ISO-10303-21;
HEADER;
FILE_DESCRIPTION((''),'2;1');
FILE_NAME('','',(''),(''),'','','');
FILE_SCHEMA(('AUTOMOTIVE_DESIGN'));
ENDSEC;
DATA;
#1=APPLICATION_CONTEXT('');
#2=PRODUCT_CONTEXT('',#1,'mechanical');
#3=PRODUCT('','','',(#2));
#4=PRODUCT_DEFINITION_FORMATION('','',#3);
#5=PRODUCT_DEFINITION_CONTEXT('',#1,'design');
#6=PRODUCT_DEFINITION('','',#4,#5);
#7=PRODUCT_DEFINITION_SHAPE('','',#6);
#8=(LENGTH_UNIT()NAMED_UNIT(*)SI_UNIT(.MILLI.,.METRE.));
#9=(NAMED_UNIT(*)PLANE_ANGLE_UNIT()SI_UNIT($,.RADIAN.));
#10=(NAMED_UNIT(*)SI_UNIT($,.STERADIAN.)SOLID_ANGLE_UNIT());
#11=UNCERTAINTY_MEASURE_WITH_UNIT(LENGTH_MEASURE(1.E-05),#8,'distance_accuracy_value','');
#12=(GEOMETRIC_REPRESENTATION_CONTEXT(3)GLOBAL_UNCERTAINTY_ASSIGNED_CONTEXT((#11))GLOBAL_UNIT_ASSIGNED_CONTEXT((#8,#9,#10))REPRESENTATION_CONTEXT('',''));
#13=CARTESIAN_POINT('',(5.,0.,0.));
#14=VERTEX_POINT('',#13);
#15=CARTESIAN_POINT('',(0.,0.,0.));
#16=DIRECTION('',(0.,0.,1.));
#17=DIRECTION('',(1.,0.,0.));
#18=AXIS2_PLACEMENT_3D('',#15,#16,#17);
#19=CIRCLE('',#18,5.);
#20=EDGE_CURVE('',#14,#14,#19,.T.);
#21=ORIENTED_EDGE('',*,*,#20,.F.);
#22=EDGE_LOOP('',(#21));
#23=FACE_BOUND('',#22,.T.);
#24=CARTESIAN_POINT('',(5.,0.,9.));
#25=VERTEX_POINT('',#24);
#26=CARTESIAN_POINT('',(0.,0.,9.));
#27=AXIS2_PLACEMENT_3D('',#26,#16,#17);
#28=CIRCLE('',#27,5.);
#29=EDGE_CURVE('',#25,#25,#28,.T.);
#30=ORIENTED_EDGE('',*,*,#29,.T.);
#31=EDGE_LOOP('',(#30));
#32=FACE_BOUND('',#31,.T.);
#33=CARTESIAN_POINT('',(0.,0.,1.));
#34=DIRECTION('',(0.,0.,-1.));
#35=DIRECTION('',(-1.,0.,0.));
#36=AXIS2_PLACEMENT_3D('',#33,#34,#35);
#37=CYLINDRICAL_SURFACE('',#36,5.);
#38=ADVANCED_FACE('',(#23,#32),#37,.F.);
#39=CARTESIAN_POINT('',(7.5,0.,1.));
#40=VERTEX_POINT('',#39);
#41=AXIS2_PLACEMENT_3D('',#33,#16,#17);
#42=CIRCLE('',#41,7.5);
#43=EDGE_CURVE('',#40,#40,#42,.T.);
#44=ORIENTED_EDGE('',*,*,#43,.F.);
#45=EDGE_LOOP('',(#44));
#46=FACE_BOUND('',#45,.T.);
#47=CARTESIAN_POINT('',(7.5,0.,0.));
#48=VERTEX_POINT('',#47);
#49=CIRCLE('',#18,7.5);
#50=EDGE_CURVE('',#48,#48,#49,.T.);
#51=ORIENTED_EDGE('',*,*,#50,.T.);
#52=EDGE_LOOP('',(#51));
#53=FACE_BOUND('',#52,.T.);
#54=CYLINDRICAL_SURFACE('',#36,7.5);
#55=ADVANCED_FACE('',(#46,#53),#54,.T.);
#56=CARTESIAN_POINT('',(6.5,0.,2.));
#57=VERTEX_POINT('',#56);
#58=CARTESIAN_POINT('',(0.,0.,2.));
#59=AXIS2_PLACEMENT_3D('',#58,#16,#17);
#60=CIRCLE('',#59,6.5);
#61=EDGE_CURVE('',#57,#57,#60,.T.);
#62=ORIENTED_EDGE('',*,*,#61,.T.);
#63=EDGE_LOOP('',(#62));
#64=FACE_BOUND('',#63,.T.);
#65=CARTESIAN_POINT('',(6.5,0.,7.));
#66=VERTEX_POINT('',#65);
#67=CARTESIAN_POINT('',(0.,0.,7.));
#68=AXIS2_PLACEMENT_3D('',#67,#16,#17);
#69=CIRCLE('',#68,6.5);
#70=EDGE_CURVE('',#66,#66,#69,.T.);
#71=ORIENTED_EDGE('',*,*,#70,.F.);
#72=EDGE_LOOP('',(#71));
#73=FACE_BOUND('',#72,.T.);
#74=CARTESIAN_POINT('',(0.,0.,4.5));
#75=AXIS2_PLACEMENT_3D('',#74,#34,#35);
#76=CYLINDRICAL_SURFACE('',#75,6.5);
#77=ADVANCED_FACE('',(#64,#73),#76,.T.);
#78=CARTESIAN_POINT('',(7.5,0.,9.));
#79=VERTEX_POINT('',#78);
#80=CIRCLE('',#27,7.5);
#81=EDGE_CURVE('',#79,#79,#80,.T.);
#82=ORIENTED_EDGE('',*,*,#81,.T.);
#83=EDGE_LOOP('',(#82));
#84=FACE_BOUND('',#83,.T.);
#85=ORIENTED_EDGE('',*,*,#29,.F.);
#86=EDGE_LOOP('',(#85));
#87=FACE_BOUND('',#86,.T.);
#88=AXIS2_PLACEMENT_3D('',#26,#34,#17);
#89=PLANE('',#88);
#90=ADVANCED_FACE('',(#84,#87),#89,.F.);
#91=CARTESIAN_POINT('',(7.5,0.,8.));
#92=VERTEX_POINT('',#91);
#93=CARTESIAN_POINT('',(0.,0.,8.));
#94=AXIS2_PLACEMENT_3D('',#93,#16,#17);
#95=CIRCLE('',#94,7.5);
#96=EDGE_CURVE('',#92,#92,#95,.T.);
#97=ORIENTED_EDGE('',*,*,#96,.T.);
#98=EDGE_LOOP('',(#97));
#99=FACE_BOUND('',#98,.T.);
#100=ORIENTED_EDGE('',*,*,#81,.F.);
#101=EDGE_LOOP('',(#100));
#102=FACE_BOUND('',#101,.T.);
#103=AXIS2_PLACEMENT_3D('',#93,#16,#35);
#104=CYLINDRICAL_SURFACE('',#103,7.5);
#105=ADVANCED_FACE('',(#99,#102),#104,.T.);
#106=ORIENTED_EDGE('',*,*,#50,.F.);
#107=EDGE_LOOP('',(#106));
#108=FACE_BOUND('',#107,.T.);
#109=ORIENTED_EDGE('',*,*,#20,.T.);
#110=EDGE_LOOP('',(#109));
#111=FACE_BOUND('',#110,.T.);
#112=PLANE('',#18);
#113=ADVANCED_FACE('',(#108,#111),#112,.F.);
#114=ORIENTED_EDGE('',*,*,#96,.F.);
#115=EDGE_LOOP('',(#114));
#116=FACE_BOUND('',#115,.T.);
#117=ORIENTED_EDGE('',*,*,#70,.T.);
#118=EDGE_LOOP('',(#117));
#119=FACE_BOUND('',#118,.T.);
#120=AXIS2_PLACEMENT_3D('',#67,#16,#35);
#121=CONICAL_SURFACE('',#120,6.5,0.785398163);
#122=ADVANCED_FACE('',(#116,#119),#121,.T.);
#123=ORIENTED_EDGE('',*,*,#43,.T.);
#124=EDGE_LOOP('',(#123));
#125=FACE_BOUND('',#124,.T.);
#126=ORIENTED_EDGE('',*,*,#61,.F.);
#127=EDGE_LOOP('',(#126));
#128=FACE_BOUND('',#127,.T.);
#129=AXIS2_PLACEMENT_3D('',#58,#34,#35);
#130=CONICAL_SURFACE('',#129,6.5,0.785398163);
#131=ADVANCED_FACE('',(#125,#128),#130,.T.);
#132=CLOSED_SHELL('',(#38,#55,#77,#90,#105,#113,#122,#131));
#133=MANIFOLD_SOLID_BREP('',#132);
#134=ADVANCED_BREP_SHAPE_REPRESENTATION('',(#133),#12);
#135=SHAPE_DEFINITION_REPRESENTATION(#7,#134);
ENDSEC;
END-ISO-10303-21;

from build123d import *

# Parameters (mm, degrees)
SKETCH1_R           = 7.5
SKETCH1_R_2         = 5
BOSS_EXTRUDE1_DEPTH = 1
SKETCH2_R           = 6.5
SKETCH2_R_2         = 5
BOSS_EXTRUDE2_DEPTH = 3.5
CHAMFER1_SIZE       = 1


with BuildPart() as part:
    # Sketch1 → Boss-Extrude1 (new body)
    with BuildSketch(Plane.XY):
        Circle(SKETCH1_R)
        Circle(SKETCH1_R_2, mode=Mode.SUBTRACT)
    extrude(amount=BOSS_EXTRUDE1_DEPTH)

    # Sketch2 → Boss-Extrude2 (add)
    with BuildSketch(Plane.XY.offset(1)):
        Circle(SKETCH2_R)
        Circle(SKETCH2_R_2, mode=Mode.SUBTRACT)
    extrude(amount=BOSS_EXTRUDE2_DEPTH)

    # Chamfer1
    chamfer1_edges = [part.edges().sort_by_distance(p)[0] for p in [
        (-6.5, 0, 1),
    ]]
    chamfer(chamfer1_edges, length=CHAMFER1_SIZE - 0.0001)  # a hair under: the kernel refuses the full size

    # Mirror5: part across plane


with BuildPart() as part_1:
    add(part.part)
    add(part.part.mirror(Plane.XY.offset(4.5)))


solid = part_1.part
